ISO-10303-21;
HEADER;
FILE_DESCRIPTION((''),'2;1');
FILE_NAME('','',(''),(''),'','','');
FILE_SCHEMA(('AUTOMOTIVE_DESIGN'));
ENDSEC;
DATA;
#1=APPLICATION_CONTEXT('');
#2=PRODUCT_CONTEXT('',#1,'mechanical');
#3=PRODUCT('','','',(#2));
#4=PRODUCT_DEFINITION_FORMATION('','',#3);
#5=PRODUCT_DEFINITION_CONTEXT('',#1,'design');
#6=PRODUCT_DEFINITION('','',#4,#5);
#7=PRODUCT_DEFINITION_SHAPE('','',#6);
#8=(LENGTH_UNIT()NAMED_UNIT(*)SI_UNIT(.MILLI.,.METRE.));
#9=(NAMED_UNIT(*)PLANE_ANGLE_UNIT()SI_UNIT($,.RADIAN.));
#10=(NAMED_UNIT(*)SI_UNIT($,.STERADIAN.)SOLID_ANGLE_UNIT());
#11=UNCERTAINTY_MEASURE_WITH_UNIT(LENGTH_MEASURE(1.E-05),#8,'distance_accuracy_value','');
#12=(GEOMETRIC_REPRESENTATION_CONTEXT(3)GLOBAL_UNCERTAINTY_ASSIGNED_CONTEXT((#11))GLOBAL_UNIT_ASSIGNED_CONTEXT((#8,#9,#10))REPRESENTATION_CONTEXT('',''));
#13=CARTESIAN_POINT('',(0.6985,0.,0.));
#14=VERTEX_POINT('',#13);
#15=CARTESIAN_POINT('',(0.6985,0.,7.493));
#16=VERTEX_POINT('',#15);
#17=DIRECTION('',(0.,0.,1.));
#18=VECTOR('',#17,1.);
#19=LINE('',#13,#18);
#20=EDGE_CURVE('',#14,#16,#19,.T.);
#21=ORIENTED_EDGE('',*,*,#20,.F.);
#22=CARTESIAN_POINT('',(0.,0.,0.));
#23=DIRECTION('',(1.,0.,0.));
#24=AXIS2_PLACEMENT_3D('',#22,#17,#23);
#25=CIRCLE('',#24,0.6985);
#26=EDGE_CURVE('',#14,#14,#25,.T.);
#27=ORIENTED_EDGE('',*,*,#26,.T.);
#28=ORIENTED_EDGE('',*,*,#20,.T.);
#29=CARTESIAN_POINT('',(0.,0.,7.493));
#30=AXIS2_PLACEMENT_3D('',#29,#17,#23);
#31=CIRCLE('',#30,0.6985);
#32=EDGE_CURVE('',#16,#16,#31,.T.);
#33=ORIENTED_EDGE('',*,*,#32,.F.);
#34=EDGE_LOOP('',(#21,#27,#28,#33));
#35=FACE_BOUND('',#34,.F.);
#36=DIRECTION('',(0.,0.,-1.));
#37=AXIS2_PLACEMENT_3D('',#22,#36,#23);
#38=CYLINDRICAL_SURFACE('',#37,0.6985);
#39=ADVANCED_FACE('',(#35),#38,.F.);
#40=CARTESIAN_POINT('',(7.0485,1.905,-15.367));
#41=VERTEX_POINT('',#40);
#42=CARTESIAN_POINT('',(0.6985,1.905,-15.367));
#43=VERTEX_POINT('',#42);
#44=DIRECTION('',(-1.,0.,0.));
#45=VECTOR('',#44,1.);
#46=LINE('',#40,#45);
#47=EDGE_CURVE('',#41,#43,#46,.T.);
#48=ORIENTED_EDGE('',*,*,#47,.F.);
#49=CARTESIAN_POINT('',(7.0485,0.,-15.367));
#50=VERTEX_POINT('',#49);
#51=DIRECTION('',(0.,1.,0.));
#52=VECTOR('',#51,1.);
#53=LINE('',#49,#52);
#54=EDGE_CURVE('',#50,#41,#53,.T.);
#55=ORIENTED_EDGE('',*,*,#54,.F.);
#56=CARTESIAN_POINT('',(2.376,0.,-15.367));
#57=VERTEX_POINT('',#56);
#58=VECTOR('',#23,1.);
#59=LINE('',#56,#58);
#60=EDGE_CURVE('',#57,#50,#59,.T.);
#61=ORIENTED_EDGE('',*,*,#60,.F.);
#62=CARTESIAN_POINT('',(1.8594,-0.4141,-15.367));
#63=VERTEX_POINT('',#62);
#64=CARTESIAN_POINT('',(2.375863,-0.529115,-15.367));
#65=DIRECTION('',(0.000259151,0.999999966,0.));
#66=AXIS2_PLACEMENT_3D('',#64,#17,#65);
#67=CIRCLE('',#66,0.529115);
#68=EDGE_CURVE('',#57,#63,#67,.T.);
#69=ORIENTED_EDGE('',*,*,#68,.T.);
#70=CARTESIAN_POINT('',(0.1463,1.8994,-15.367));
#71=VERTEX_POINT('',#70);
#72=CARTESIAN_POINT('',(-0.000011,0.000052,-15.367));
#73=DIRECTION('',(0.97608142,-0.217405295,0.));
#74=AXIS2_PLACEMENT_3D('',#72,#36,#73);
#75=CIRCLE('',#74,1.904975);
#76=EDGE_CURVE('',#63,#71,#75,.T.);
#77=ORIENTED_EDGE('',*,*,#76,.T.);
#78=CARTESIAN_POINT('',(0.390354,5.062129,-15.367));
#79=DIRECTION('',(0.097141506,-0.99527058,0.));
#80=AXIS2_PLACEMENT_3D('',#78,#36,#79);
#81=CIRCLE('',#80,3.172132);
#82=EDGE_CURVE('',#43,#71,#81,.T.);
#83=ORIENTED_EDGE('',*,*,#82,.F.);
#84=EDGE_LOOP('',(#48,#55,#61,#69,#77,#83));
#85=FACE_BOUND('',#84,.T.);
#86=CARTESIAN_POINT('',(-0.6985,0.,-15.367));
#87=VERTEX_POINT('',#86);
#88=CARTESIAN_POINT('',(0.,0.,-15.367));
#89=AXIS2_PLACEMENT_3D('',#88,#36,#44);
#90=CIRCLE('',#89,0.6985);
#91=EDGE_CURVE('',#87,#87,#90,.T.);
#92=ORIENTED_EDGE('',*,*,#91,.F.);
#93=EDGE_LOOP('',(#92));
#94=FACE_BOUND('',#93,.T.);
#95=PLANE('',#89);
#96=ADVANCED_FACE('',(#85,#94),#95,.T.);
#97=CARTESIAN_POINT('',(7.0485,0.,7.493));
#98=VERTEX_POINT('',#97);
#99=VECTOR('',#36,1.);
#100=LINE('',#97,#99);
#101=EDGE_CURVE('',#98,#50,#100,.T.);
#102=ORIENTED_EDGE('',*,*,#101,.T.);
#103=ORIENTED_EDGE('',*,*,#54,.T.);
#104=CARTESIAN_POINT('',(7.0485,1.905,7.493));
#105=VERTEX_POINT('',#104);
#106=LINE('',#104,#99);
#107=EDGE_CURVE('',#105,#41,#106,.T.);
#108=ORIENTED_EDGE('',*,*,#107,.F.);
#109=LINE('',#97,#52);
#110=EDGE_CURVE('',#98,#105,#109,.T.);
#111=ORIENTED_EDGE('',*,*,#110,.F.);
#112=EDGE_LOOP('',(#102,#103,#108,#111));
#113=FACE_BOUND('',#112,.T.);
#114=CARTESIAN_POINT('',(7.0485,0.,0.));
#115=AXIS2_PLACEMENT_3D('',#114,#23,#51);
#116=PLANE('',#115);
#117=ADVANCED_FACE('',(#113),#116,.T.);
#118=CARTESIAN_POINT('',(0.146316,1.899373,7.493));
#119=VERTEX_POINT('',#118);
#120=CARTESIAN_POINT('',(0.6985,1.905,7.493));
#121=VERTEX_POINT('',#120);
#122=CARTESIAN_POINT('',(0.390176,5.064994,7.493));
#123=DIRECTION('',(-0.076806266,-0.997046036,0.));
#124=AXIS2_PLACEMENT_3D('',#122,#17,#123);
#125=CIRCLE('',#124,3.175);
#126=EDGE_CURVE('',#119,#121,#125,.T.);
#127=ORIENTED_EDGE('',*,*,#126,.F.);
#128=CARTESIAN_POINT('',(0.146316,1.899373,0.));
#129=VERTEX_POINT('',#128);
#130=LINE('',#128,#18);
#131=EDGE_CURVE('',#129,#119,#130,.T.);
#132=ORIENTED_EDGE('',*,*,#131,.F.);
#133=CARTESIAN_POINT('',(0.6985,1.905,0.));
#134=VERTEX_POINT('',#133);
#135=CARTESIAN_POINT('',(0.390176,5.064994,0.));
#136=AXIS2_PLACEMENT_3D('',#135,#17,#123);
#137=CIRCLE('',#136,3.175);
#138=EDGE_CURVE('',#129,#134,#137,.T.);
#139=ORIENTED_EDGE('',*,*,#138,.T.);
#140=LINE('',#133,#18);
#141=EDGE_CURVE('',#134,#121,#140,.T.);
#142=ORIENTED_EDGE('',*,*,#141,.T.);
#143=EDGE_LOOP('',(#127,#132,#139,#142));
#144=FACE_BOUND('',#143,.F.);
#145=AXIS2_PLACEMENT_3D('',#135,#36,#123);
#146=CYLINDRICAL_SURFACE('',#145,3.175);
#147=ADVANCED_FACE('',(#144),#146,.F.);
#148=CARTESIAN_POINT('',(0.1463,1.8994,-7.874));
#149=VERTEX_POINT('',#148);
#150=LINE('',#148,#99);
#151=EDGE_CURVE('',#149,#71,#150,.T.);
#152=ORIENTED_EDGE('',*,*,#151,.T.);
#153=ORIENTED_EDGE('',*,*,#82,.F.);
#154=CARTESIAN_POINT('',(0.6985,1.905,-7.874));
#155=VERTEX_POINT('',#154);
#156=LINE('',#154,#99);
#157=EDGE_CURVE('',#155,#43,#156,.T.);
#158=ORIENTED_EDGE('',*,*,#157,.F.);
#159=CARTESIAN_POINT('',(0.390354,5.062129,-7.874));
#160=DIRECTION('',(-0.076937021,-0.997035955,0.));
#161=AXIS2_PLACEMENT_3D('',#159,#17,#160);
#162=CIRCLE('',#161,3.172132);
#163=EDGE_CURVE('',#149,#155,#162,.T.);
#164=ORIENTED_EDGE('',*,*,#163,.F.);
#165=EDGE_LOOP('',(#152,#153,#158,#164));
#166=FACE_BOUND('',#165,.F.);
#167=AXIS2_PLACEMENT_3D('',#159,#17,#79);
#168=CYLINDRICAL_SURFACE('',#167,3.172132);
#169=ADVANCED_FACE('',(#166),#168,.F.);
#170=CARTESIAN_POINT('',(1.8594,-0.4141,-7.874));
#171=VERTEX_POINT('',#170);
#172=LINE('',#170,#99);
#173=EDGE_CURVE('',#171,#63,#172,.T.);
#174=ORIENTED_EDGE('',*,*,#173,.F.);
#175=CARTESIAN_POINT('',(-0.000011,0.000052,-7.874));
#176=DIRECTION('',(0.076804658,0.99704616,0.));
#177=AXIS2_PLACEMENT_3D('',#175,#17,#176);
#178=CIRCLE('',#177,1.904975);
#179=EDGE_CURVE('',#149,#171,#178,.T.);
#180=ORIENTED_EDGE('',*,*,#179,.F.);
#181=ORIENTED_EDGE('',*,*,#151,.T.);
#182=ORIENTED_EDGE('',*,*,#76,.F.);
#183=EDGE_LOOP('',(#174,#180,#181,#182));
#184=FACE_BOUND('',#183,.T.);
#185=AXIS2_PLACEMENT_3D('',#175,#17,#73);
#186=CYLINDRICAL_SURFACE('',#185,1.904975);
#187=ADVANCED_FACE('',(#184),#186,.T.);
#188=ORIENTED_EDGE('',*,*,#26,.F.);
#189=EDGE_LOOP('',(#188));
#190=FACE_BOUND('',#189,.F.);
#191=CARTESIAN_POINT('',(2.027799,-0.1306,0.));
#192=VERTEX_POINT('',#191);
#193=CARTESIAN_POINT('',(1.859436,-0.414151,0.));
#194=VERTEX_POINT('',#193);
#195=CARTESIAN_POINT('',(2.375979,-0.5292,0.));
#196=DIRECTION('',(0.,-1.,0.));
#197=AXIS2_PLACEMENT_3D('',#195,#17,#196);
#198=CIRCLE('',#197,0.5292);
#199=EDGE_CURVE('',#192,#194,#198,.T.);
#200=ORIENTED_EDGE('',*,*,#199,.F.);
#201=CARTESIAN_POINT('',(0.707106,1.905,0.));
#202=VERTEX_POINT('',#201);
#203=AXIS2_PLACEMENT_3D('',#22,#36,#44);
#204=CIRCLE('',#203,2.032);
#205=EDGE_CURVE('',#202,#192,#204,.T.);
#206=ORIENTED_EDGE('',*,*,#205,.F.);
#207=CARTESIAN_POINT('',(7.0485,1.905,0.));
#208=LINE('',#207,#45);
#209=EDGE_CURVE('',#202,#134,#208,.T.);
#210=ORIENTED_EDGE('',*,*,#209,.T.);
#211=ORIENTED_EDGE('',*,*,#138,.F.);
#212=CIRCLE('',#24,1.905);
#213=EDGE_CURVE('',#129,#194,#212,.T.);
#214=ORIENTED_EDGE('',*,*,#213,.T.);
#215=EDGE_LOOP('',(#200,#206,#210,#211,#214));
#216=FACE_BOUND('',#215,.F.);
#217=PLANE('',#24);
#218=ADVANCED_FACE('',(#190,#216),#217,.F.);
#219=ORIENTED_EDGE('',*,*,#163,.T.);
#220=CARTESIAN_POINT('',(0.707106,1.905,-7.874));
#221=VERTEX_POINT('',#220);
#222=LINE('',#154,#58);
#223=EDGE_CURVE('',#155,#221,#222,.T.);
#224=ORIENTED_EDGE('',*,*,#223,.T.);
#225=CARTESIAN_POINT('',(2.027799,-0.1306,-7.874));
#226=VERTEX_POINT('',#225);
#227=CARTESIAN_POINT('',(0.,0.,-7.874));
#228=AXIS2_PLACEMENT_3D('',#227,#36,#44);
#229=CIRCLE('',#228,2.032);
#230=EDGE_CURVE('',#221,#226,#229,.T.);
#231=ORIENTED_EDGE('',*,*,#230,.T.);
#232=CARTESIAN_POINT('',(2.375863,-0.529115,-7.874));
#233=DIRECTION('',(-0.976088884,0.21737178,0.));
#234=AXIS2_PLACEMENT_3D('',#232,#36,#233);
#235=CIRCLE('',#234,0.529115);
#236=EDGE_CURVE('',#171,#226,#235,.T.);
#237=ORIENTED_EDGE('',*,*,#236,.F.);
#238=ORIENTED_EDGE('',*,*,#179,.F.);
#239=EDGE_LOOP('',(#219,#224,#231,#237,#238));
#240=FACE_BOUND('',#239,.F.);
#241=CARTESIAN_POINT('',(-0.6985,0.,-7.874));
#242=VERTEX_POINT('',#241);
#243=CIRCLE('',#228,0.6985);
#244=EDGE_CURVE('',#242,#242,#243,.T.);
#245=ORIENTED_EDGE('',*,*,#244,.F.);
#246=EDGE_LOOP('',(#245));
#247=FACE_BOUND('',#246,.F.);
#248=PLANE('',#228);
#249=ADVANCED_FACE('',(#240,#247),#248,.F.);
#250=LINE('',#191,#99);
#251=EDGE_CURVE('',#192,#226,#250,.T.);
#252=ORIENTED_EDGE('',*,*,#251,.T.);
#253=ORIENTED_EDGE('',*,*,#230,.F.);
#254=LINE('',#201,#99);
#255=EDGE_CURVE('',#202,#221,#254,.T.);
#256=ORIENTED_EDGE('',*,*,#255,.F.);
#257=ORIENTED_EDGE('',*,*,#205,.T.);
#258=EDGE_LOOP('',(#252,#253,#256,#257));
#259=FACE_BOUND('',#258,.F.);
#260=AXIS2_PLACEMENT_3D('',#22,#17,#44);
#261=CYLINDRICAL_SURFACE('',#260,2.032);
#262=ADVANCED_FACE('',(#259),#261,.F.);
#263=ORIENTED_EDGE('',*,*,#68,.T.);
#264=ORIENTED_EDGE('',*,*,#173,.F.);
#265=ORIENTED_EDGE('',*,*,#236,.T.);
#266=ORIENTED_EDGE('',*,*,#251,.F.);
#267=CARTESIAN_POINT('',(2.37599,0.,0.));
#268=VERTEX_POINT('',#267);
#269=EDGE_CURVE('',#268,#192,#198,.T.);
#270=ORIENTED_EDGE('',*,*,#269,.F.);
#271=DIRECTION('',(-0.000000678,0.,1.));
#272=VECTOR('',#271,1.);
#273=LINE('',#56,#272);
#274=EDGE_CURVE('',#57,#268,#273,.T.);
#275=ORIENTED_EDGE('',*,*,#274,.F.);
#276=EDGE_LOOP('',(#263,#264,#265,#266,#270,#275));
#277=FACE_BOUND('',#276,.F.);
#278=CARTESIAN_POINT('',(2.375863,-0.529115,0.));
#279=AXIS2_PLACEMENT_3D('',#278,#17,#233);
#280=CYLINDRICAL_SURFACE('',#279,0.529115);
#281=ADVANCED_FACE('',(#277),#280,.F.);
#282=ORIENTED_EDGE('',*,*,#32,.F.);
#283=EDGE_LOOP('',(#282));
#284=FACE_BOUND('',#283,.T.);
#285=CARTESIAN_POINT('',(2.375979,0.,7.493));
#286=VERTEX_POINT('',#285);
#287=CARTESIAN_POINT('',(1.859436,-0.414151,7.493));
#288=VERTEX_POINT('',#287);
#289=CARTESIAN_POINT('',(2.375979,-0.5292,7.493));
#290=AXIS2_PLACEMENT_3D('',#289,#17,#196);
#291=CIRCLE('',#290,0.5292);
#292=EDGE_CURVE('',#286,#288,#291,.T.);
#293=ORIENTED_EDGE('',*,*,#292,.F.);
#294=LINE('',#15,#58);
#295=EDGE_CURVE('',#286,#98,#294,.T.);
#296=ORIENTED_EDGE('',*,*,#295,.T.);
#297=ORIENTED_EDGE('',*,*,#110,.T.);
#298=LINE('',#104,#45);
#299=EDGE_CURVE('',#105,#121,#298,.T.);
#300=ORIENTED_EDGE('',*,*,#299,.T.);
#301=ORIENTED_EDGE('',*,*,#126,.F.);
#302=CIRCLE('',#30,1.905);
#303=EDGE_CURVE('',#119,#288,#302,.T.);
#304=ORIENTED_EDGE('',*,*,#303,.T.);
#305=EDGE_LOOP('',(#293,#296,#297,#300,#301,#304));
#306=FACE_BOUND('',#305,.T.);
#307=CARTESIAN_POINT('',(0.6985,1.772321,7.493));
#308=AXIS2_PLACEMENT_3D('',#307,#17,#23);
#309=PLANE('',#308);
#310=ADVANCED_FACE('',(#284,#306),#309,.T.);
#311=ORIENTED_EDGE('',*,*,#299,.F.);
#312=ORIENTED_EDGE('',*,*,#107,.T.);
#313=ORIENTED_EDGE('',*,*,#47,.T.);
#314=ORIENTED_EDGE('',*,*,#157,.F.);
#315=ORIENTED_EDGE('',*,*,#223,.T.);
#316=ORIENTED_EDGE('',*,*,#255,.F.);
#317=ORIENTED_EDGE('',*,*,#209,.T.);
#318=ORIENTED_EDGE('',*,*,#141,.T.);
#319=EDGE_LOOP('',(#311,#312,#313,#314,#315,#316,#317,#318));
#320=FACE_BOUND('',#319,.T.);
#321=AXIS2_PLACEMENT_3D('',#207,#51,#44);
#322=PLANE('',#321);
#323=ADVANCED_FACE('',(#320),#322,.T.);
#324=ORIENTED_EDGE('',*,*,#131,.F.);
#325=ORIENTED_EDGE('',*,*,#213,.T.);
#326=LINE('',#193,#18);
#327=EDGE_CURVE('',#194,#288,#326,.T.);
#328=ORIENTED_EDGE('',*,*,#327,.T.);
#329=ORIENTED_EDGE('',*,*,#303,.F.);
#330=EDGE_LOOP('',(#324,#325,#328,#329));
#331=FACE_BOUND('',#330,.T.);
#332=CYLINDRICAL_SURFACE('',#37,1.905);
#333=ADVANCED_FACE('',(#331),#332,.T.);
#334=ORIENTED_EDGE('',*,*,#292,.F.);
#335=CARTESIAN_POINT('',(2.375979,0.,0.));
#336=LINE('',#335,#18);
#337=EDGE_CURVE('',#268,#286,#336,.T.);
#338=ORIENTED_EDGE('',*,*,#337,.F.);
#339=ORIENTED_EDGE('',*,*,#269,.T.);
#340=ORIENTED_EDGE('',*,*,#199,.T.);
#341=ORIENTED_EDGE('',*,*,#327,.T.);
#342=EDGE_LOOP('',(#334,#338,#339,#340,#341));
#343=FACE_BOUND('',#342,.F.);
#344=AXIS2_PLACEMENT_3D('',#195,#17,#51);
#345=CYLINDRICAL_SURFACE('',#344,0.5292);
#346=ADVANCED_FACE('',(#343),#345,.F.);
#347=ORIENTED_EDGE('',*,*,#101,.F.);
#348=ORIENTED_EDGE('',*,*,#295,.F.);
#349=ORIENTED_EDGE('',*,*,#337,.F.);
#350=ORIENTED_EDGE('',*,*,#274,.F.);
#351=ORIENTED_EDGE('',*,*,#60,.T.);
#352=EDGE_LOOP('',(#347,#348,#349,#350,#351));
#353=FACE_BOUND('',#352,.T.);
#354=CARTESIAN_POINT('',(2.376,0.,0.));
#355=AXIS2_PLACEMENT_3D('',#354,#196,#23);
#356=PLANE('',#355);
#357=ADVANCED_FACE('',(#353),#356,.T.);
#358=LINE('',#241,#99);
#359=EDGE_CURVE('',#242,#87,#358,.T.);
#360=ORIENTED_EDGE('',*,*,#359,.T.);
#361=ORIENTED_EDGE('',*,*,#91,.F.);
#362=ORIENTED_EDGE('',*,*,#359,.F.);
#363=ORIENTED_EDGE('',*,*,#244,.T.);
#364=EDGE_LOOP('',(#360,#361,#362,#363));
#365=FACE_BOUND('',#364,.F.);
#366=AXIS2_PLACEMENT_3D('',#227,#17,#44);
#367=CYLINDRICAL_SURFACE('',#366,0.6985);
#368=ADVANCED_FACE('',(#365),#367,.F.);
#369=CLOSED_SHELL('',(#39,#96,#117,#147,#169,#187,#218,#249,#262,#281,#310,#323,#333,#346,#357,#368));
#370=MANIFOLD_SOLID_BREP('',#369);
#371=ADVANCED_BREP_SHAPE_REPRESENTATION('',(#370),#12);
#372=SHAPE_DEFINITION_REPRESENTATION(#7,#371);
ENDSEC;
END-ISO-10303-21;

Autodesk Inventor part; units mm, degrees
ref_plane "YZ Plane" through (0, 0, 0) normal (1, 0, 0) x (0, 1, 0)
ref_plane "XZ Plane" through (0, 0, 0) normal (0, 1, 0) x (-1, 0, 0)
ref_plane "XY Plane" through (0, 0, 0) normal (0, 0, 1) x (1, 0, 0)
sketch "Sketch1" plane through (0, 0, 0) normal (0, 0, 1) x (1, 0, 0)
  circle A0 centre (0, 0) radius 0.6985
  circle A1 centre (0, 0) radius 1.905
  line L0 (0.6985, 0) -> (7.0485, 0)
  line L1 (7.0485, 0) -> (7.0485, 1.905)
  line L2 (7.0485, 1.905) -> (0.6985, 1.905)
  line L3 (0.6985, 1.905) -> (0.6985, 0)
  point P0 (0.6985, 1.7723)
  point P1 (1.905, 0)
  dimension "d0" = 1.397
  dimension "d1" = 3.81
  dimension "d4" = 6.35
  dimension "d5" = 1.905
extrude "Extrusion1" add sketch "Sketch1" along normal blind 7.493
fillet "Fillet1" radius 3.175 1 edges at (0.6985, 1.7723, 3.7465)
fillet "Fillet2" radius 0.5292 1 edges at (1.905, 0, 3.7465)
sketch "Sketch2" plane through (0, 0, 0) normal (0, 0, -1) x (-1, 0, 0)
  arc A0 (-0.6985, 1.905) -> (-0.1463, 1.8994) centre (-0.3902, 5.065) ccw projected
  line L0 (-7.0485, 1.905) -> (-0.6985, 1.905) projected
  line L1 (-7.0485, 0) -> (-7.0485, 1.905) projected
  line L2 (-2.376, 0) -> (-7.0485, 0) projected
  arc A1 (-1.8594, -0.4141) -> (-2.376, 0) centre (-2.376, -0.5292) ccw projected
  arc A2 (-1.8594, -0.4141) -> (-0.1463, 1.8994) centre (0, 0) ccw projected
  circle A3 centre (0, 0) radius 0.6985 projected
  circle A4 centre (0, 0) radius 1.905
  circle A5 centre (0, 0) radius 2.032
  line L3 (-0.5019, 1.969) -> (-0.5019, 1.892)
  point P0 (-2.0278, -0.1307)
  point P1 (0.0205, 1.3968)
  point P2 (-0.7071, 1.905)
  dimension "d8" = 0.127
extrude "Extrusion2" add sketch "Sketch2" along normal blind 7.874 contours A5 A1 L2 L1 L0
extrude "Extrusion3" add sketch "Sketch2" along normal blind 7.493 from surface at 7.874 contours A0 A4 A1 A5 L0 | A5 A1 L2 L1 L0 | A2 A4
properties part number "outerhinge"
